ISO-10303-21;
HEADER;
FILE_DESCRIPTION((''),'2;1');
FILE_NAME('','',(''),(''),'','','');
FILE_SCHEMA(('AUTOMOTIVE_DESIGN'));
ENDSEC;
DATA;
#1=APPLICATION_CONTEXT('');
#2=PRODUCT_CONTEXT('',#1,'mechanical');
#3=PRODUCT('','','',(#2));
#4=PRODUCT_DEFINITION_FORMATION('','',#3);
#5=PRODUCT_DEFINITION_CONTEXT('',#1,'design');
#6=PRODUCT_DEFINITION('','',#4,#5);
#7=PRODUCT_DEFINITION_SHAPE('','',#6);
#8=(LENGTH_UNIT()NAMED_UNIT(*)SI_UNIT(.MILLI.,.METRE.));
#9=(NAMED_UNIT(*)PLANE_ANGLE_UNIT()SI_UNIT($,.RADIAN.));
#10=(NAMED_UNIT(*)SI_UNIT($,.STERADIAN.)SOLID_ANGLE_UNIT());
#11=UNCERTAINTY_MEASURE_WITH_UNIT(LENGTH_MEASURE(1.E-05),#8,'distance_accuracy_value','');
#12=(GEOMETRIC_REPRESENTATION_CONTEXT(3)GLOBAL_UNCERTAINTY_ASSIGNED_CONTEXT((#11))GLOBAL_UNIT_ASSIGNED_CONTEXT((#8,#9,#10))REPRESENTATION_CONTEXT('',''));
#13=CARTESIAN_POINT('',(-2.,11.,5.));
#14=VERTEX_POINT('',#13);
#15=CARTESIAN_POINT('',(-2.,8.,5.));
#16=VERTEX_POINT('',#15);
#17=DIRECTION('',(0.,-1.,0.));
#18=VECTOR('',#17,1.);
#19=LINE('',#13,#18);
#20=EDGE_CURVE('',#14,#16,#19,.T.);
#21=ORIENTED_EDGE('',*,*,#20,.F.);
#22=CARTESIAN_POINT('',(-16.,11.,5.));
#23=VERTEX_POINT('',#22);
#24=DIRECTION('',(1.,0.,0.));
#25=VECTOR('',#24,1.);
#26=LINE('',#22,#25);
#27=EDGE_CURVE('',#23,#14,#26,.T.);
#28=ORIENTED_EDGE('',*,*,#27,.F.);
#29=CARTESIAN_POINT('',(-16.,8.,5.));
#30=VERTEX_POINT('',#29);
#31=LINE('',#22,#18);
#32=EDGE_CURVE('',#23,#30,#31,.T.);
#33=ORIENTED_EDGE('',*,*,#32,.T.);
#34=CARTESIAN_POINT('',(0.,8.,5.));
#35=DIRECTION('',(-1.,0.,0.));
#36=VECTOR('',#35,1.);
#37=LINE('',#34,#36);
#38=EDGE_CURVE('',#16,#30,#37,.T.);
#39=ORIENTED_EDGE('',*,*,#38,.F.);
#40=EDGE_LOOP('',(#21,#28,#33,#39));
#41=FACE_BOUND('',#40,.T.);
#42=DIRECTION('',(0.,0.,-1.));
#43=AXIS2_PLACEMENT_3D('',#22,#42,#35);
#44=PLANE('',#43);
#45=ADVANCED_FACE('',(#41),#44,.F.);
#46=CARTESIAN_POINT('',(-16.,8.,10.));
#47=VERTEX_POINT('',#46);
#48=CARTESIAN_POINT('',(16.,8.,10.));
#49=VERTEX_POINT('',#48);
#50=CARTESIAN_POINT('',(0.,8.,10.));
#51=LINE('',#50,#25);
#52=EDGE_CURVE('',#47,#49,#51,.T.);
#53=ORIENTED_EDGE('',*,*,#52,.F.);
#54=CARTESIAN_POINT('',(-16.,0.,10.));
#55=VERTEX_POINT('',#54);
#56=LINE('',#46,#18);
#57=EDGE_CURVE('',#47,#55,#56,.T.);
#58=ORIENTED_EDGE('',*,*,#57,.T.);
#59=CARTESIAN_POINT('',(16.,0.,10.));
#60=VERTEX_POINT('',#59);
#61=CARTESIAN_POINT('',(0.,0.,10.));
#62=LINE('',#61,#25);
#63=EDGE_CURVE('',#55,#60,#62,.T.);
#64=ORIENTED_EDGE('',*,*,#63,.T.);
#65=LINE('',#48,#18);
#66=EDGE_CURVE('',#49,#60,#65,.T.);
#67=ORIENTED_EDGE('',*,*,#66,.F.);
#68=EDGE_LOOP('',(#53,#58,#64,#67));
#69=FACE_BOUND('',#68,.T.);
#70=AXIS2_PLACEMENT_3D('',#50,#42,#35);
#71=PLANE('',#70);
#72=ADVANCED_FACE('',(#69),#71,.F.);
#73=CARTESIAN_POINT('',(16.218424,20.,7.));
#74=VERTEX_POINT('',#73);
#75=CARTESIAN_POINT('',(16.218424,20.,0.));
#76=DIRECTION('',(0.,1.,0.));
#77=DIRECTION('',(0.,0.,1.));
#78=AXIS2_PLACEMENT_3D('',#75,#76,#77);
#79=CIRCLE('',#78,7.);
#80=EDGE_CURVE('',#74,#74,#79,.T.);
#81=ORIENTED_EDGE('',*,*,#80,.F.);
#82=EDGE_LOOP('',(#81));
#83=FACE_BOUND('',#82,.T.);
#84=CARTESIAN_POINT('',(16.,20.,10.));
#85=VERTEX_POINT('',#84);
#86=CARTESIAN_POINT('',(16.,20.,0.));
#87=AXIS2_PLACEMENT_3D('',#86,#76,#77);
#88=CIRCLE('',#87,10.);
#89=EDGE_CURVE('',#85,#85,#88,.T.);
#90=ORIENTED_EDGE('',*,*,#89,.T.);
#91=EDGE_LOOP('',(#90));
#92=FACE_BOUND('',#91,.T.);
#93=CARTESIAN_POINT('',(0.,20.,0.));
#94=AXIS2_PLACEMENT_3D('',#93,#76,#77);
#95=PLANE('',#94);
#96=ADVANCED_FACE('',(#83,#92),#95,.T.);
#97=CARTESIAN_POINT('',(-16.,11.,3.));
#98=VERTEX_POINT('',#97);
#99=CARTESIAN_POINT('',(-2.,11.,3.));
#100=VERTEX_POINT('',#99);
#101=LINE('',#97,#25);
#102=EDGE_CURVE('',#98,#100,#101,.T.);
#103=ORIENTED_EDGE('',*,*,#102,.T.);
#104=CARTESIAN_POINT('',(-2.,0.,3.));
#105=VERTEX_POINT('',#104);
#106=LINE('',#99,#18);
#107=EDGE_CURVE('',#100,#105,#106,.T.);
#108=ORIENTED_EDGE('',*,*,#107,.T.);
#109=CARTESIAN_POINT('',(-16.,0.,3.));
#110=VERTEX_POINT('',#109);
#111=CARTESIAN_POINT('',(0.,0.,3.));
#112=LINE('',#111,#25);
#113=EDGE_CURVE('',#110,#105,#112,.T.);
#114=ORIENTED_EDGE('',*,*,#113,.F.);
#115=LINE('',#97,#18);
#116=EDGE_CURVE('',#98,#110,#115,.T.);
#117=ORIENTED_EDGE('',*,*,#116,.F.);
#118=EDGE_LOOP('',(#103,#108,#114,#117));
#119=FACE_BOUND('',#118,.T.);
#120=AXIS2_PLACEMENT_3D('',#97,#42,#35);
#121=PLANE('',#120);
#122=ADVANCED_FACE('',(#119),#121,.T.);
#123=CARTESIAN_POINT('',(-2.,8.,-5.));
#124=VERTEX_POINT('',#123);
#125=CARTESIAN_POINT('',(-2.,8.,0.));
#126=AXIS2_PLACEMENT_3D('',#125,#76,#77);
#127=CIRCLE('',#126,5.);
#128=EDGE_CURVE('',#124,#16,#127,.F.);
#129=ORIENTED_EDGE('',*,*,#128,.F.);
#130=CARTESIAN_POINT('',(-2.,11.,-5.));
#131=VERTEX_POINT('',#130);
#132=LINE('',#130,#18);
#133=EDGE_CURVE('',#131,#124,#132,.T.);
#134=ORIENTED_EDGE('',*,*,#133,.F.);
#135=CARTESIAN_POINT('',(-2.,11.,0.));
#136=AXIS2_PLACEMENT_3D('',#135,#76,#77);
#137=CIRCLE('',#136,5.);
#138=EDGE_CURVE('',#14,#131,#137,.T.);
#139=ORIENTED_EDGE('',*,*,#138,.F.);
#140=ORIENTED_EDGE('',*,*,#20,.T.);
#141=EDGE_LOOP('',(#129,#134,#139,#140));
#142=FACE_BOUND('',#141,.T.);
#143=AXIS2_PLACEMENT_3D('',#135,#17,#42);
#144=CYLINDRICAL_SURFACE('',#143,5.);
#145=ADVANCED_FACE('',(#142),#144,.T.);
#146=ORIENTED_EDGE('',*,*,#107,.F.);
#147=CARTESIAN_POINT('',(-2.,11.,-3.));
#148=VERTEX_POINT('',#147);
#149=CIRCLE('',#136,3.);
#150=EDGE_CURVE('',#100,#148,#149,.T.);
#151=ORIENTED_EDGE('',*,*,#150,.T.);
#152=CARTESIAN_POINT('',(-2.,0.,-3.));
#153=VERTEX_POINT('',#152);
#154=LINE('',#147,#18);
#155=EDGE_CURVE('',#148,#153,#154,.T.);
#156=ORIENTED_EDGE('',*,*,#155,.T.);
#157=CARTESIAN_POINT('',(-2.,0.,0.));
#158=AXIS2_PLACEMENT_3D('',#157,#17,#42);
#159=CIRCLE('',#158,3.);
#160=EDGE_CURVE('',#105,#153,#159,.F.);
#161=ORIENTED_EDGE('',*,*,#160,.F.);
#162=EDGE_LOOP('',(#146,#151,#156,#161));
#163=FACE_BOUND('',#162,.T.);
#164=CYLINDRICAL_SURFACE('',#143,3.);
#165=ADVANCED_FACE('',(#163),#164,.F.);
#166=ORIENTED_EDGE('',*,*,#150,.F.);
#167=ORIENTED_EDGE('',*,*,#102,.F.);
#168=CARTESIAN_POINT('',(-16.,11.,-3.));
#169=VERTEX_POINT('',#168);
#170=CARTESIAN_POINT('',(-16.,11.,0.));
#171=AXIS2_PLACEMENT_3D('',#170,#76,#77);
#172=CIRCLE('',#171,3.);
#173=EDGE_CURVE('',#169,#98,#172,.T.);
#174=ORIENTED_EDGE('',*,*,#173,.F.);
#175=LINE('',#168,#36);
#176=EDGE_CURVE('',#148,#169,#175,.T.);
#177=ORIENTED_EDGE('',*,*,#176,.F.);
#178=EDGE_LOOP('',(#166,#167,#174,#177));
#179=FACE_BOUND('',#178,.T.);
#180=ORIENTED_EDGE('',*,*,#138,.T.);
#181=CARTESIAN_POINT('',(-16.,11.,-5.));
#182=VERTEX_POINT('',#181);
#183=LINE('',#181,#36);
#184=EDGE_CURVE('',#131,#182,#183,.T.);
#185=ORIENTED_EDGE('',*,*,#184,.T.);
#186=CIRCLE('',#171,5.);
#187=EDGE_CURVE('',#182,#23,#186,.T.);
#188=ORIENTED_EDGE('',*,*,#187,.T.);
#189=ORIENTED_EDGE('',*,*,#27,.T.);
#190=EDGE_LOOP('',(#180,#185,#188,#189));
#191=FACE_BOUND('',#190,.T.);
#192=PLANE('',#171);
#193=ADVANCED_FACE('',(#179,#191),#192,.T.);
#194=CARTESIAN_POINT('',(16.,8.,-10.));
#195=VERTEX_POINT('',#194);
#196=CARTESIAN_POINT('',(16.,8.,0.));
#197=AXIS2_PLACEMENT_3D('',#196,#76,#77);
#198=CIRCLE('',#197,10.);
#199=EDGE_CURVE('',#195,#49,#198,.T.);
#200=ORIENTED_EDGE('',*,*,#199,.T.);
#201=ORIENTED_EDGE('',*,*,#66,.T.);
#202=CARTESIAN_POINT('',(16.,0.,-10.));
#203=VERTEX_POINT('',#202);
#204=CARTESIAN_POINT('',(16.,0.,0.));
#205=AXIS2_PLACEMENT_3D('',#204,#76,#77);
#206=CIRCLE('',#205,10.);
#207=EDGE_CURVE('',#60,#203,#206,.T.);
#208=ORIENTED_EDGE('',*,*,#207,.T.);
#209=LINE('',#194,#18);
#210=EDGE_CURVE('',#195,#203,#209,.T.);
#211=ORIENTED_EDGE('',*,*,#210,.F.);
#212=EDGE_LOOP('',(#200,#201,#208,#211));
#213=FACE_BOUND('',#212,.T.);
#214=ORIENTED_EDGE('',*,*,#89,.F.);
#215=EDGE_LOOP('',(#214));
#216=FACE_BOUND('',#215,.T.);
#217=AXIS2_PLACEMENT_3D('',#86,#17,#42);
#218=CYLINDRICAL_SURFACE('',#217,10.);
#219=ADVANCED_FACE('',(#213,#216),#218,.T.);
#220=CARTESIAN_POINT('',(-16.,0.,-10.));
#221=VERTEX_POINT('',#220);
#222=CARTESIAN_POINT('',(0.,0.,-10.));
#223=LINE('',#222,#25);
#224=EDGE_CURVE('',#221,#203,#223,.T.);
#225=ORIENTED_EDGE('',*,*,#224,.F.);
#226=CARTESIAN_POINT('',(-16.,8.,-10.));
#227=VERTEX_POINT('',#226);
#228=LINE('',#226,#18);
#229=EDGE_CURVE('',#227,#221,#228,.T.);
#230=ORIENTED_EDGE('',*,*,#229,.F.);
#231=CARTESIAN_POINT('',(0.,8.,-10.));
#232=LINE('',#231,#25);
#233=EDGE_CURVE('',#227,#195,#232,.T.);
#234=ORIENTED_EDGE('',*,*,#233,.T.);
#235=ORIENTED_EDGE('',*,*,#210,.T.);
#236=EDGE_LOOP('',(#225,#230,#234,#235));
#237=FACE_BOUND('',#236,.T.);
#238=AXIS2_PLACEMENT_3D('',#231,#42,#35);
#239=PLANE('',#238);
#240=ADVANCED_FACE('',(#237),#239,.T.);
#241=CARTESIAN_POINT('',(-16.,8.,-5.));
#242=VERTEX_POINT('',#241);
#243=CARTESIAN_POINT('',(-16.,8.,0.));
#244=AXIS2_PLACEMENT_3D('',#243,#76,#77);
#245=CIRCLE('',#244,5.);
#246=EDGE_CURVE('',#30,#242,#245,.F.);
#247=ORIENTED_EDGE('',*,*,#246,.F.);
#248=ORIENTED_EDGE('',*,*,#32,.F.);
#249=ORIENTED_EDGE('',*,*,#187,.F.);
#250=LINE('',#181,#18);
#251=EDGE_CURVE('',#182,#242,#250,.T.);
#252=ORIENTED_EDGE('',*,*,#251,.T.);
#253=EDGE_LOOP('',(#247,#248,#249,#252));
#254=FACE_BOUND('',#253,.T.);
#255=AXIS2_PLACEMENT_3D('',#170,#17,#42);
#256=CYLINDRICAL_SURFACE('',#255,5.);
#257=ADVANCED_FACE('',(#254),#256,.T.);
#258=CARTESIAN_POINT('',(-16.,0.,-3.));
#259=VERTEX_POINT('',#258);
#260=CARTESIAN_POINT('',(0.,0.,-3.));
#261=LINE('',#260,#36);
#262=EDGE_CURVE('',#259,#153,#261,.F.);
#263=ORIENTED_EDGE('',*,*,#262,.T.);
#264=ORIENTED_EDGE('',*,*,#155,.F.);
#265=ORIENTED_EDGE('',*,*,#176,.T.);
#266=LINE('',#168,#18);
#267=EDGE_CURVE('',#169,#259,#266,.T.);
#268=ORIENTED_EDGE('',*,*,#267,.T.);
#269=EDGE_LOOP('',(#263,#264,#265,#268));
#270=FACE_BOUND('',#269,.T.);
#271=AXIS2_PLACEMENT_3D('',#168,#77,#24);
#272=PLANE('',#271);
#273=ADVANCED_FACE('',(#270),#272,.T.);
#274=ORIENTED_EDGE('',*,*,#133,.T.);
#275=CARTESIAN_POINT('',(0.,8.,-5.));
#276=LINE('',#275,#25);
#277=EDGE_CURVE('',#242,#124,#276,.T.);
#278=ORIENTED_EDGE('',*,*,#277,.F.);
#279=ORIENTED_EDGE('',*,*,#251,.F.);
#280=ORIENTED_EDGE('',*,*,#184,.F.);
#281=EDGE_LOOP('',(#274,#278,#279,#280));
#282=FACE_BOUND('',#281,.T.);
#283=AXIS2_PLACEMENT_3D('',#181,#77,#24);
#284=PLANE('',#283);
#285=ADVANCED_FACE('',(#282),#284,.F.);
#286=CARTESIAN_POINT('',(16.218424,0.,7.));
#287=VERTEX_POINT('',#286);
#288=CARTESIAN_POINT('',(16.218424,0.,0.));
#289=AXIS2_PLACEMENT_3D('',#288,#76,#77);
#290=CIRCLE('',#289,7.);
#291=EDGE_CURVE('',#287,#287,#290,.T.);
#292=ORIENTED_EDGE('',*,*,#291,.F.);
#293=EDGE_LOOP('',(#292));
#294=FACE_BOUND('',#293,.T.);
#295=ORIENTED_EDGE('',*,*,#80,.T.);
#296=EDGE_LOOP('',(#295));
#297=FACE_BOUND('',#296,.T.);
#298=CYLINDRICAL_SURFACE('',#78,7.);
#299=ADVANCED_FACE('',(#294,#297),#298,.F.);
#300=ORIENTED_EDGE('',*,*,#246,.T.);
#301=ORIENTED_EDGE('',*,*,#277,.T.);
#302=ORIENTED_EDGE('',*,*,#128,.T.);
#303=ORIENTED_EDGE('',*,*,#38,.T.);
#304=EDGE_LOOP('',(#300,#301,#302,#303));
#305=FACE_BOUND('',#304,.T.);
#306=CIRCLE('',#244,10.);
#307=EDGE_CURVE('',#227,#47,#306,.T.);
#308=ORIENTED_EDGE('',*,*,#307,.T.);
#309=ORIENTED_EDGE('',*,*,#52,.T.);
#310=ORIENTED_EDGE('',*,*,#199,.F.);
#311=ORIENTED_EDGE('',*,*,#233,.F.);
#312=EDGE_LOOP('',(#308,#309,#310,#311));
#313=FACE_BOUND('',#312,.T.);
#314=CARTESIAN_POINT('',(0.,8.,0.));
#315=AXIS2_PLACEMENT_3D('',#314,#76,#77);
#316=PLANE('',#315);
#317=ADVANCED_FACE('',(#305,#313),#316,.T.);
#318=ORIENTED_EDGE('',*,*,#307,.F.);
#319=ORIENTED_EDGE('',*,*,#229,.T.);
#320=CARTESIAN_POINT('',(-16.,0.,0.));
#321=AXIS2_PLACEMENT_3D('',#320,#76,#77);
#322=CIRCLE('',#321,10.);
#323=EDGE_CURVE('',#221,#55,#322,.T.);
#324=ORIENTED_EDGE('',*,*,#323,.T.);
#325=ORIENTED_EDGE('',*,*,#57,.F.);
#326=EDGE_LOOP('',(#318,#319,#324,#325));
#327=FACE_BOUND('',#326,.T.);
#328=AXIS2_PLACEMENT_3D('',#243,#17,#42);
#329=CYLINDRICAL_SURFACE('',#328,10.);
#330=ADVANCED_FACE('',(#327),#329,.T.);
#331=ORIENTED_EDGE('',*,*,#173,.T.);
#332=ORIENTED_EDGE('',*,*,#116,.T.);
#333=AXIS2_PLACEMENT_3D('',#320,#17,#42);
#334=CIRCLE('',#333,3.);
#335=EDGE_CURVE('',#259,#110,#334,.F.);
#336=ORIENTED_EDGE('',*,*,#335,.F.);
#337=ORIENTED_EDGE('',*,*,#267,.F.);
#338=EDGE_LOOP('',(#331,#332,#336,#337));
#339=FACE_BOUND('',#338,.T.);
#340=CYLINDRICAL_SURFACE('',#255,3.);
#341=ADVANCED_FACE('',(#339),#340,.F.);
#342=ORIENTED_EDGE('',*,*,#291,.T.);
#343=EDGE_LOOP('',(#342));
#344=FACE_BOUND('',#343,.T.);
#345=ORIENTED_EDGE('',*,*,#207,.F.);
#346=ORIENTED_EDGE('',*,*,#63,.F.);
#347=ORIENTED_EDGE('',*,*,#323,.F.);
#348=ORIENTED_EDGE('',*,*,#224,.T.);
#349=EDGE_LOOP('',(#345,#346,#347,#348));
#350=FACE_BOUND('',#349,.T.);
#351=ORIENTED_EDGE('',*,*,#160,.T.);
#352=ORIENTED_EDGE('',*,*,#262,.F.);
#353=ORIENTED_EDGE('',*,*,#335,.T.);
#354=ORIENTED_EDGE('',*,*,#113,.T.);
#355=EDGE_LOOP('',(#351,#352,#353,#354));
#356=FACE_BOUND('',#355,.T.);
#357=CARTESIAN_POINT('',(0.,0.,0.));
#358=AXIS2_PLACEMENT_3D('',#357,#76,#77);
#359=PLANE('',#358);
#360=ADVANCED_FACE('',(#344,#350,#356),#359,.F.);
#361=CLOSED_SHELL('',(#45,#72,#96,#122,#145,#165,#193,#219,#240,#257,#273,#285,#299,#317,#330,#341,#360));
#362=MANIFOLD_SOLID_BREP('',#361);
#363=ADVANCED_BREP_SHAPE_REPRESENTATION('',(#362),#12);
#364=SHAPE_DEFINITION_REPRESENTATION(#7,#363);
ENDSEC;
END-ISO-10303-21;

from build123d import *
from build123d.topology import SkipClean

# Parameters (mm, degrees)
EXTRUDE_1_DEPTH          = 20
EXTRUDE_2_DEPTH          = 8
EXTRUDE_3_DEPTH          = 11
CUT_EXTRUDE_7_DEPTH      = 35.292856399
CUT_EXTRUDE_7_DEPTH_BACK = 35.292856399


with BuildPart() as part:
    # 草图2 → 凸台-拉伸1 (new body)
    with BuildSketch(Plane(origin=(0, 0, 0), x_dir=(1, 0, 0), z_dir=(0, 1, 0))):
        with BuildLine():
            ThreePointArc((26, 0), (23.071067812, 7.071067812), (16, 10))
            ThreePointArc((16, 10), (6, 0), (16, -10))
            ThreePointArc((16, -10), (23.071067812, -7.071067812), (26, 0))
        make_face()
    extrude(amount=EXTRUDE_1_DEPTH)

    # 草图2<3> → 凸台-拉伸2 (add)
    with BuildSketch(Plane(origin=(0, 0, 0), x_dir=(1, 0, 0), z_dir=(0, 1, 0))):
        with BuildLine():
            Line((16, 10), (-16, 10))
            ThreePointArc((-16, 10), (-26, 0), (-16, -10))
            Line((-16, -10), (16, -10))
            ThreePointArc((16, -10), (6, 0), (16, 10))
        make_face()
    extrude(amount=EXTRUDE_2_DEPTH)

    # 草图7 → 凸台-拉伸3 (add)
    with BuildSketch(Plane(origin=(0, 0, 0), x_dir=(1, 0, 0), z_dir=(0, 1, 0))):
        with BuildLine():
            Line((-16, 5), (-2, 5))
            ThreePointArc((-2, 5), (3, 0), (-2, -5))
            Line((-2, -5), (-16, -5))
            ThreePointArc((-16, -5), (-21, 0), (-16, 5))
        make_face()
        with BuildLine():
            Line((-16, 3), (-2, 3))
            ThreePointArc((-2, 3), (1, 0), (-2, -3))
            Line((-2, -3), (-16, -3))
            ThreePointArc((-16, -3), (-19, 0), (-16, 3))
        make_face(mode=Mode.SUBTRACT)
    extrude(amount=EXTRUDE_3_DEPTH)

    # 草图7<6> → 切除-拉伸7 (cut, two sides: drawn at the far end of the back side and taken through both)
    with SkipClean():  # the faces are left unmerged after this step: merging them gives an invalid solid
        with BuildSketch(Plane(origin=(0, 0, 0), x_dir=(1, 0, 0), z_dir=(0, 1, 0)).offset(-CUT_EXTRUDE_7_DEPTH_BACK)):
            with BuildLine():
                Line((-16, -3), (-2, -3))
                ThreePointArc((-2, -3), (1, 0), (-2, 3))
                Line((-2, 3), (-16, 3))
                ThreePointArc((-16, 3), (-19, 0), (-16, -3))
            make_face()
        extrude(amount=CUT_EXTRUDE_7_DEPTH + CUT_EXTRUDE_7_DEPTH_BACK, mode=Mode.SUBTRACT)
    add(part.part.scale(1), mode=Mode.REPLACE)  # the faces are merged on a copy

    # 草图13 → Ø1.0mm 暗销孔1 (revolve, cut)
    with BuildSketch(Plane(origin=(16.218423998, 20, 0), x_dir=(0, 0, 1), z_dir=(1, 0, 0))):
        Polygon((0, 0), (0, 20), (7, 20), (7, 0), (0.525, 0), align=None)
    revolve(axis=Axis((16.218423998, 26.35, 0), (0, -1, 0)), mode=Mode.SUBTRACT)


solid = part.part
